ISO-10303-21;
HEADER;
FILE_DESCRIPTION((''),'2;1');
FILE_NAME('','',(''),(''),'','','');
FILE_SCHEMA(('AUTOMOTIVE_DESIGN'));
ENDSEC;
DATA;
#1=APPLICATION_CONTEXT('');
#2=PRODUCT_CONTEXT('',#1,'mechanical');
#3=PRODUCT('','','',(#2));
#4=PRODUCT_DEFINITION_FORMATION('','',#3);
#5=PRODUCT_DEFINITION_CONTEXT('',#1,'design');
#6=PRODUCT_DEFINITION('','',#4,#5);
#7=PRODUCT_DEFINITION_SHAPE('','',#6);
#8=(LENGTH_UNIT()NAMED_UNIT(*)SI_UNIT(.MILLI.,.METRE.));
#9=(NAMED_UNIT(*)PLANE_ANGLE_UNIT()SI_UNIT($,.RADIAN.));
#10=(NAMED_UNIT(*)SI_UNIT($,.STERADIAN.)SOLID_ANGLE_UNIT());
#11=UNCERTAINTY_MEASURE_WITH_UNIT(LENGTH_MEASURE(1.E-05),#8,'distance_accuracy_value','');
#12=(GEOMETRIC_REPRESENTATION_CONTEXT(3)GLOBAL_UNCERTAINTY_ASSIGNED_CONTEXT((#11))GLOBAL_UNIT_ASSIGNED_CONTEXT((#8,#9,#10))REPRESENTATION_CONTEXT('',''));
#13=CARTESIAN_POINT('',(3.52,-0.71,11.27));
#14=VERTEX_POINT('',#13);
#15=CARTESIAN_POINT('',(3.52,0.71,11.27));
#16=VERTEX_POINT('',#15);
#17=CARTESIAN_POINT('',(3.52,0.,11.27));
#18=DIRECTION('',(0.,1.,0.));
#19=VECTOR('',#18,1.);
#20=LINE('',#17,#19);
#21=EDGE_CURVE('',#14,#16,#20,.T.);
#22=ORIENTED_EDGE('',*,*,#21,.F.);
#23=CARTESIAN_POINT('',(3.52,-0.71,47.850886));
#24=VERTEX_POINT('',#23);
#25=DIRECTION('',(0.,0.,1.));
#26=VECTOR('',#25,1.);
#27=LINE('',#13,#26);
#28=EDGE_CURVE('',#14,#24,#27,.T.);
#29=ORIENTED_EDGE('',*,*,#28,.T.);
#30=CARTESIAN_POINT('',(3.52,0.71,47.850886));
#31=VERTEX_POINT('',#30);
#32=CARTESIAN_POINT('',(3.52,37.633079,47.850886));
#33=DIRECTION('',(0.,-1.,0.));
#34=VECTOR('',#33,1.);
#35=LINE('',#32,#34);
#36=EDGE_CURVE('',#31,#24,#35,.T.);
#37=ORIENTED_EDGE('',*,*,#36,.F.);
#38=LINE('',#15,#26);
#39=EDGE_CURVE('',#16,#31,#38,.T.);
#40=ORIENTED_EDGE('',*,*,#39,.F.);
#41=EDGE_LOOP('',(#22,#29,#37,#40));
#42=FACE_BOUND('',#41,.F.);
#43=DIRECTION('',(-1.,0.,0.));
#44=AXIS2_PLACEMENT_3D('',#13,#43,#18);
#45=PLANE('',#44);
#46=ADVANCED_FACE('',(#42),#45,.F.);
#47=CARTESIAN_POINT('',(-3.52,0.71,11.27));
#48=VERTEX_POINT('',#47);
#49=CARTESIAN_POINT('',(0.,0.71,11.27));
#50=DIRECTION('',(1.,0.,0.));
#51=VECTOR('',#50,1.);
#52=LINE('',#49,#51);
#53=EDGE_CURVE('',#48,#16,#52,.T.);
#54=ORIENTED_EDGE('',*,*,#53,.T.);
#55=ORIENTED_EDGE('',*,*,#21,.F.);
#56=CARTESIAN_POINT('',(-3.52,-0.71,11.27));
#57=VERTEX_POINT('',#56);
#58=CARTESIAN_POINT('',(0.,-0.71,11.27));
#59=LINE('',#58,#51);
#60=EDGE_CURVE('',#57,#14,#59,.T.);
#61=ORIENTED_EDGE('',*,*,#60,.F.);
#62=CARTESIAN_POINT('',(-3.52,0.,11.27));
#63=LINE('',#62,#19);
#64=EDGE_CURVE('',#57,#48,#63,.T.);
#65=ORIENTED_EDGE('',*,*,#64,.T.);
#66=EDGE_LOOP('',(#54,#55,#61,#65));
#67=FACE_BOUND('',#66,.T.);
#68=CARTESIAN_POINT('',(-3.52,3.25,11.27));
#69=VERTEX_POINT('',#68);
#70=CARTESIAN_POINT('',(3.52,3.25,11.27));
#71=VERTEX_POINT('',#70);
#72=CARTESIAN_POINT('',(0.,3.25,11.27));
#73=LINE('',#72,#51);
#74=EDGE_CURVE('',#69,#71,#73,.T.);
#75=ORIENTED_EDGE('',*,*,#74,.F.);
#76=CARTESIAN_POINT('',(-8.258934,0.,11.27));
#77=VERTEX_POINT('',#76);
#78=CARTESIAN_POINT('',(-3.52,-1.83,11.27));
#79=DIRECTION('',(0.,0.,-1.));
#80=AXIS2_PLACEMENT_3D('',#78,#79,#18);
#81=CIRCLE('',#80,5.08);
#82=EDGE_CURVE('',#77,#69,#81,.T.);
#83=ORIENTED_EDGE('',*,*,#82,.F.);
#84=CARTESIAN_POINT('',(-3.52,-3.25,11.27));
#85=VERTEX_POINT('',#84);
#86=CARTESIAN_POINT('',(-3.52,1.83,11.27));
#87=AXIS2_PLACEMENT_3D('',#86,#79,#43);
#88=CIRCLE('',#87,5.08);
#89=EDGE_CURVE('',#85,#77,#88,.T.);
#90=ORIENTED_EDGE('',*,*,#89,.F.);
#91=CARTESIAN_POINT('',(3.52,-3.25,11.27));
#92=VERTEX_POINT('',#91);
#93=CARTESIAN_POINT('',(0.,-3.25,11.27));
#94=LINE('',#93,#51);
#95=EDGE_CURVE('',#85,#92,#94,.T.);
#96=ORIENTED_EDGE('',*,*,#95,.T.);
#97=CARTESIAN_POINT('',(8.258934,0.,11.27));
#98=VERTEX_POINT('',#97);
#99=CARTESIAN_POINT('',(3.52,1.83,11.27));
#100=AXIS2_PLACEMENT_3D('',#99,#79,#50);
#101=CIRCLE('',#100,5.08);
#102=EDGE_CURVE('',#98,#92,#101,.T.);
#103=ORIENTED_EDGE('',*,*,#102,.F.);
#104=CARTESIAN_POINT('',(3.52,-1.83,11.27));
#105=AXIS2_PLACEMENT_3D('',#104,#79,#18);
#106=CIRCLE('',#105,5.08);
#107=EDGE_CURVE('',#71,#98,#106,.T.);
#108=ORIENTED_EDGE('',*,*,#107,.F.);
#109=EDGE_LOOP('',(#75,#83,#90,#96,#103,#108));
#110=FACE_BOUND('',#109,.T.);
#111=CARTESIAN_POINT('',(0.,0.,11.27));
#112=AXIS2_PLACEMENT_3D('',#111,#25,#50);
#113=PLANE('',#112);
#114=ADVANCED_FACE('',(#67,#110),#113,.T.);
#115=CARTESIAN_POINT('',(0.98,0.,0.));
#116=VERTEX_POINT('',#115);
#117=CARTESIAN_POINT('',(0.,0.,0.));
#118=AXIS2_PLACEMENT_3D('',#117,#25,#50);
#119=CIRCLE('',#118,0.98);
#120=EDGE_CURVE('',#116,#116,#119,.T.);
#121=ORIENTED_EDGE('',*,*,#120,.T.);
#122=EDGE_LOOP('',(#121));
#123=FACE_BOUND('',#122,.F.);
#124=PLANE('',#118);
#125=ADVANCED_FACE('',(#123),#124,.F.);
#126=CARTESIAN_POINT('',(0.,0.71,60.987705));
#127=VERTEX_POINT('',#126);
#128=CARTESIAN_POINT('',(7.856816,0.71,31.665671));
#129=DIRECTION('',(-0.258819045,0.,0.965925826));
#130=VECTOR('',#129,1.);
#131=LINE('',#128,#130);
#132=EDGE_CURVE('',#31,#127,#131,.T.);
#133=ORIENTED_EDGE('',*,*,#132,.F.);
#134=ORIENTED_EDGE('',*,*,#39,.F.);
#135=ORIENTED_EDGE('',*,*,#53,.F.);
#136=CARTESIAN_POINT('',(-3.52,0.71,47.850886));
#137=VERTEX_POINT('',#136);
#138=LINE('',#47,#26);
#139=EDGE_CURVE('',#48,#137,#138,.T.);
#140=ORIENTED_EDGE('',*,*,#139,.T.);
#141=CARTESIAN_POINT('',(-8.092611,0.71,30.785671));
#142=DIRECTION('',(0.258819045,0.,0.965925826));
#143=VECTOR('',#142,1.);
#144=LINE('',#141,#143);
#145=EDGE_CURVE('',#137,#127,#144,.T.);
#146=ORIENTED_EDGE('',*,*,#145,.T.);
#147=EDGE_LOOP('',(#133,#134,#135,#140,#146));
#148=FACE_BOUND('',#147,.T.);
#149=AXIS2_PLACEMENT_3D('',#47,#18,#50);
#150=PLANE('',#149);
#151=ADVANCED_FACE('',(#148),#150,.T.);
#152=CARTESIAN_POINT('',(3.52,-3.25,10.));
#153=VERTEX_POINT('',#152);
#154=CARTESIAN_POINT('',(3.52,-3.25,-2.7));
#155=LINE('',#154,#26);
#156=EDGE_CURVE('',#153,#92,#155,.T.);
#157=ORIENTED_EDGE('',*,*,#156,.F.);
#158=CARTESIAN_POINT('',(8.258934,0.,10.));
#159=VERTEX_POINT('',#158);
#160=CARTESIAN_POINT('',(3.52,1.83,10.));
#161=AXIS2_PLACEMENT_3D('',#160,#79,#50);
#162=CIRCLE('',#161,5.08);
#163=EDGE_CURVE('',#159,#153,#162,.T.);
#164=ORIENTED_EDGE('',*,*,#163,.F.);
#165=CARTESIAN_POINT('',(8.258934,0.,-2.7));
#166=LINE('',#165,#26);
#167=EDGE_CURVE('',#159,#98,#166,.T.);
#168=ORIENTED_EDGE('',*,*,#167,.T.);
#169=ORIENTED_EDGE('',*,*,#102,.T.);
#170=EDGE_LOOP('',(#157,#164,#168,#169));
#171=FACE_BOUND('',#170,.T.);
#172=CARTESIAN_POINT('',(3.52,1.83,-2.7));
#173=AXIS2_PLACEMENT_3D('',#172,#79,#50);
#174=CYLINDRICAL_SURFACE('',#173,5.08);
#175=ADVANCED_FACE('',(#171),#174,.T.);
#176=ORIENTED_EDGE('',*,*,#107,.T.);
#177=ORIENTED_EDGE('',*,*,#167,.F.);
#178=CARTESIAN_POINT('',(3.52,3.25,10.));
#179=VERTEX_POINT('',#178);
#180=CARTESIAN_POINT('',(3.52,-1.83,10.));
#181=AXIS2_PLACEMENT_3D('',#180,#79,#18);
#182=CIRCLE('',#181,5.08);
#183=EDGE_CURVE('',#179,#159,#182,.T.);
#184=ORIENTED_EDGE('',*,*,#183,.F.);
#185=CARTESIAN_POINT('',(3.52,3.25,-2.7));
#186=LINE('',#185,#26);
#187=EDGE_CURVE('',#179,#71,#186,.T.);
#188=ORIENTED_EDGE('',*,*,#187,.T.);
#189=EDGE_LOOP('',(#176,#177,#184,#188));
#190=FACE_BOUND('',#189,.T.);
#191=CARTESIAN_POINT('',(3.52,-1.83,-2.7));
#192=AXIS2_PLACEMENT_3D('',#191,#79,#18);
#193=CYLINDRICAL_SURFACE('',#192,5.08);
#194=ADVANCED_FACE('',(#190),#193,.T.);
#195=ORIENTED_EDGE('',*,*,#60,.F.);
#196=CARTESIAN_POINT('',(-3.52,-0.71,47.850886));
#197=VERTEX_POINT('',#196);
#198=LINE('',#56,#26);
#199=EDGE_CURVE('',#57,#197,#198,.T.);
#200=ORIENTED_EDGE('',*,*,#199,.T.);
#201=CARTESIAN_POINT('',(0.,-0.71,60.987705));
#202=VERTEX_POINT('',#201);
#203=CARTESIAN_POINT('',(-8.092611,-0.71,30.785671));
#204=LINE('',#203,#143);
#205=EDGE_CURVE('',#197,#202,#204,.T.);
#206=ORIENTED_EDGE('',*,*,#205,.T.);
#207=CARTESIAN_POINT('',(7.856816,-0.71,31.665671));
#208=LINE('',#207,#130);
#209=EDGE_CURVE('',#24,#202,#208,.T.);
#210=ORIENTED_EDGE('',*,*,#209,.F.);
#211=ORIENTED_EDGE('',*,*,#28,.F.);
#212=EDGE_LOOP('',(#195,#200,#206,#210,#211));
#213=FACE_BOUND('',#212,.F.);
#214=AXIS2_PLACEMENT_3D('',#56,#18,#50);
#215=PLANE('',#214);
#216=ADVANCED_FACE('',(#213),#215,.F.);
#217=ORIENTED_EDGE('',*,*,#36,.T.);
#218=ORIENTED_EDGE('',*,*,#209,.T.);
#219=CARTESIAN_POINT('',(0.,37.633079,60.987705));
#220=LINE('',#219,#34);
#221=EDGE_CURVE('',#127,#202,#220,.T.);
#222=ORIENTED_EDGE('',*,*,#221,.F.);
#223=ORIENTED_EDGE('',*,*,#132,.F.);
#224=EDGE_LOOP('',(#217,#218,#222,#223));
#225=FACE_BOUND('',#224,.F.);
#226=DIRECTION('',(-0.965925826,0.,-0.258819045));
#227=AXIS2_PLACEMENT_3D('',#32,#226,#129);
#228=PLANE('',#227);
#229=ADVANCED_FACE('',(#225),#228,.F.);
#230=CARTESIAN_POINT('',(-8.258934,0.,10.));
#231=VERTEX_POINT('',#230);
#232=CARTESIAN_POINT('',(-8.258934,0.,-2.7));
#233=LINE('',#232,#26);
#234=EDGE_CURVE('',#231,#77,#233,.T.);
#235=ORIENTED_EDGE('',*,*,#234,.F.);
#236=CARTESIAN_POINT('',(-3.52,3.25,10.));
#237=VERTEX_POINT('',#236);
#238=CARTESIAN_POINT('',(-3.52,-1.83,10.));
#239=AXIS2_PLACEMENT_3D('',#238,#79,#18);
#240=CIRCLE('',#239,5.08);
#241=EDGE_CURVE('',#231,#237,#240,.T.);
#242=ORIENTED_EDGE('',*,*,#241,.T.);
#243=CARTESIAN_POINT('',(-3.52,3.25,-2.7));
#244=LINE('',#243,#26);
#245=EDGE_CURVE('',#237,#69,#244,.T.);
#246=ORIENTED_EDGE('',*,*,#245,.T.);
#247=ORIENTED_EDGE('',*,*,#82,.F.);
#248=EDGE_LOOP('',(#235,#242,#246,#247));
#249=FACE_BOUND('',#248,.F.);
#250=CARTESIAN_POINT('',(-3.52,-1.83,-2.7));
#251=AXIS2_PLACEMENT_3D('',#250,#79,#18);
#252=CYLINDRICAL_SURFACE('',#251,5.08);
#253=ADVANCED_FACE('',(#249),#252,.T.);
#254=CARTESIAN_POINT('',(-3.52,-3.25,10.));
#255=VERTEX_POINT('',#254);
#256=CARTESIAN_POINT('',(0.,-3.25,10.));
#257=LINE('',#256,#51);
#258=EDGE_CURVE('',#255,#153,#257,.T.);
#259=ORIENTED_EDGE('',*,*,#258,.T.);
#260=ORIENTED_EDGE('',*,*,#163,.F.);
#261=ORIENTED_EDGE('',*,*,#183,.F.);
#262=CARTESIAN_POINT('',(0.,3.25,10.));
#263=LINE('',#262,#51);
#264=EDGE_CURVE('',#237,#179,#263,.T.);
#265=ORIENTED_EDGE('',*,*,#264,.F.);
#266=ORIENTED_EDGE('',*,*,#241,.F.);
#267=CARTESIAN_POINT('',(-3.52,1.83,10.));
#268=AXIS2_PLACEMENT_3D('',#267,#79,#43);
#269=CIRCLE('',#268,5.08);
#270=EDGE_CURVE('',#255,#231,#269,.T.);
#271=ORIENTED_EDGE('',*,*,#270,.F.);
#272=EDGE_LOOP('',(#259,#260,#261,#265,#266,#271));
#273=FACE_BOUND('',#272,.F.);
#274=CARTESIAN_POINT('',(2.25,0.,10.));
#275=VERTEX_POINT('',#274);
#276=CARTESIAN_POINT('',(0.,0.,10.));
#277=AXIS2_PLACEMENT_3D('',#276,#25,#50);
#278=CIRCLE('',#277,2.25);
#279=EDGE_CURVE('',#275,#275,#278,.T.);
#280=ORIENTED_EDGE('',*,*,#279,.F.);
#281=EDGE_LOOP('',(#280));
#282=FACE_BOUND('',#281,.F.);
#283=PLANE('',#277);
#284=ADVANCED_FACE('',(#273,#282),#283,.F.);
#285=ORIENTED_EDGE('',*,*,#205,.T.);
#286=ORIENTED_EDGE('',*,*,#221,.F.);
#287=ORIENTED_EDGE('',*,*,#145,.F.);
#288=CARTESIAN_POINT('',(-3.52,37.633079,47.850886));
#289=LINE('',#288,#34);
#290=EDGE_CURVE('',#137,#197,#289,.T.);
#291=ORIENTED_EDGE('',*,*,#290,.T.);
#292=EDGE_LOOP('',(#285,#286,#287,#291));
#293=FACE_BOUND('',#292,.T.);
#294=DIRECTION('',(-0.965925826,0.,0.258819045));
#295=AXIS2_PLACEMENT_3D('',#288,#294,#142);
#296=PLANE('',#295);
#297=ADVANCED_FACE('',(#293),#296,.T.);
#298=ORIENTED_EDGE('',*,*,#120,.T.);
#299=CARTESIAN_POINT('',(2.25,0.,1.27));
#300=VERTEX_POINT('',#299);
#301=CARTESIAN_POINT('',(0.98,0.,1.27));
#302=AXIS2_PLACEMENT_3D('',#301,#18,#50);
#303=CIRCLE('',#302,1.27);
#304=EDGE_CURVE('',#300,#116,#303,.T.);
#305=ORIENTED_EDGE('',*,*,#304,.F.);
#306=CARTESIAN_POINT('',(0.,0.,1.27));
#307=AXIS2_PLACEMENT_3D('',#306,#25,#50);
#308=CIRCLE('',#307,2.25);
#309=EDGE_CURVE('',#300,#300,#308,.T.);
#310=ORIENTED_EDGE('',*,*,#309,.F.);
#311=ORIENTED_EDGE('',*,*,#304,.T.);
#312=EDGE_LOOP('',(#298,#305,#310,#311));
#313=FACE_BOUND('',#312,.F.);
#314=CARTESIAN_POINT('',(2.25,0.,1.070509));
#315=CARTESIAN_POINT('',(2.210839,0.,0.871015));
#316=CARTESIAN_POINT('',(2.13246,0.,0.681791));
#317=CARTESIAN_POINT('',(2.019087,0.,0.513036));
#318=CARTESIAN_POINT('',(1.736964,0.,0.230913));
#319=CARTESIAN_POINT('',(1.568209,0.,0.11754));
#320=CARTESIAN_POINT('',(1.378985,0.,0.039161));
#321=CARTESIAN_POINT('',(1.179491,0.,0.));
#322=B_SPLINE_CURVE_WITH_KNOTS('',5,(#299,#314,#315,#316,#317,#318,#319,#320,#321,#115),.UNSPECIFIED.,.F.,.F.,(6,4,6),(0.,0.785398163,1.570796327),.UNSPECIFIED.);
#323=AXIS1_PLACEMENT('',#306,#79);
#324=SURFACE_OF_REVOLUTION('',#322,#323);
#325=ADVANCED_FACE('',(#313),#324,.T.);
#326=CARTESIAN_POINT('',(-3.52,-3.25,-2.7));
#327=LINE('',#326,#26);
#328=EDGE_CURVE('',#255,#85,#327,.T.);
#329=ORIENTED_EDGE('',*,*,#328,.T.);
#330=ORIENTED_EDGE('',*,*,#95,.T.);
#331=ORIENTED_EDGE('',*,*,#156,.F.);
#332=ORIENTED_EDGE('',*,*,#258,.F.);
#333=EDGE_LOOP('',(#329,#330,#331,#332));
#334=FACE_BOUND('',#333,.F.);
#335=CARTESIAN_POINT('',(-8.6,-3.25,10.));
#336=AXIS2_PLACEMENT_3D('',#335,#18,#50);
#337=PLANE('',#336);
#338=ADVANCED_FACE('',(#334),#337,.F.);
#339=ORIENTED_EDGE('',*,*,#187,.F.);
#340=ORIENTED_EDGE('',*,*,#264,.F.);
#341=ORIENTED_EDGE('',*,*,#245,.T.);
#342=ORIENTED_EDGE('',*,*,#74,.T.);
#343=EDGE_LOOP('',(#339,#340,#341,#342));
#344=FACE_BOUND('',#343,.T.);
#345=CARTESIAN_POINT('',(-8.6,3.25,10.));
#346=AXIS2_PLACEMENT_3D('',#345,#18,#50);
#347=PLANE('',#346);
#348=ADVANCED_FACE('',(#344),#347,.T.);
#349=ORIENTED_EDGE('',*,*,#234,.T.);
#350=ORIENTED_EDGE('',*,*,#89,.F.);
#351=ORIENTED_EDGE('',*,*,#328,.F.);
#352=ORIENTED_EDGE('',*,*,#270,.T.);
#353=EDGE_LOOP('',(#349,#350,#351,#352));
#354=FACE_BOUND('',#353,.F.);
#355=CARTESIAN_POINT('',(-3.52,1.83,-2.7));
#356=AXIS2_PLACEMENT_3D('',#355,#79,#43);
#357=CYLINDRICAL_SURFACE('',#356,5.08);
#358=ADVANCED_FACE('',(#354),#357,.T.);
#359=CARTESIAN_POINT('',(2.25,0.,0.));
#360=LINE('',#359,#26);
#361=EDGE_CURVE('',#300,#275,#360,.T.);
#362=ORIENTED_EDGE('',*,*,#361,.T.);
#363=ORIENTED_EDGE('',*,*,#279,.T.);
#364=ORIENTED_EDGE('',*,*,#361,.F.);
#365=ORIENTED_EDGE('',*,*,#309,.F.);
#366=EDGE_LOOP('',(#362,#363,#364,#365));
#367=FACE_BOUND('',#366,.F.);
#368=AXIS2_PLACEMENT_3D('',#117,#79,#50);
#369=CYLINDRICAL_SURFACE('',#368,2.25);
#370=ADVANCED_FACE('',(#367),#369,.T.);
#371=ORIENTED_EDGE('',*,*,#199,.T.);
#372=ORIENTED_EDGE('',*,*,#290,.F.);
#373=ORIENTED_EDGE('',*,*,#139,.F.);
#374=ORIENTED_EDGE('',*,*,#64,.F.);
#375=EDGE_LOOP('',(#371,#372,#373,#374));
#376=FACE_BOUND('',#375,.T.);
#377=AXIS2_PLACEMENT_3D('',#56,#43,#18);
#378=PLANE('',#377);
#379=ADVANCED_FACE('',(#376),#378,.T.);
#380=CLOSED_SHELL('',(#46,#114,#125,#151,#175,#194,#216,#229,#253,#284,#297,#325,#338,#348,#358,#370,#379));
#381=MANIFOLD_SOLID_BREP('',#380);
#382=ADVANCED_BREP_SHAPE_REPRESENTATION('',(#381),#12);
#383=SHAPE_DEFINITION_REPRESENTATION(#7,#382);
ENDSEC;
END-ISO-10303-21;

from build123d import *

# Parameters (mm, degrees)
F0_R        = 2.25
F1_DEPTH    = 10
F2_W        = 17.2
F2_H        = 6.5
F2_R        = 2.25
F3_DEPTH    = 1.27
F4_W        = 7.04
F4_H        = 1.42
F5_DEPTH    = 50.8
F6_T1_DEPTH = 75.2661578682
F7_T1_DEPTH = 26.67
F8_R        = 1.27


# Not quite as in the source:
# - a fillet or chamfer that OpenCascade refuses, or shapes differently, is made with other operations: its cross-section is extruded or revolved along the edge and cut away or added


with BuildPart() as f1:
    # F0 (on Top) → F1 (new body)
    with BuildSketch(Plane.XY):
        Circle(F0_R)
    extrude(amount=F1_DEPTH)

    # F2 (on face) → F3 (join)
    with BuildSketch(Plane.XY.offset(10)):
        Rectangle(F2_W, F2_H)
        Circle(F2_R, mode=Mode.SUBTRACT)
        Circle(F2_R)
    extrude(amount=F3_DEPTH)

    # F4 (on face) → F5 (join)
    with BuildSketch(Plane.XY.offset(11.27)):
        Rectangle(F4_W, F4_H)
    extrude(amount=F5_DEPTH)

    # F6: chamfer of 3.81 x 14.2191135768 on 2 edges, made by hand

    # F6_s2 → F6_t1 (cut)
    with BuildSketch(Plane.XZ.offset(-37.6330789341)):
        Polygon((-3.52, 47.8508864232), (0.29, 62.07), (-3.52, 62.07), align=None)
        Polygon((3.52, 47.8508864232), (-0.29, 62.07), (3.52, 62.07), align=None)
    extrude(amount=F6_T1_DEPTH, mode=Mode.SUBTRACT)

    # F7: fillet of radius 5.08 on 4 edges, made by hand

    # F7_s2 → F7_t1 (cut)
    with BuildSketch(Plane.XY.offset(-2.7)):
        with BuildLine():
            ThreePointArc((-8.6, 1.83), (-7.1121024484, -1.7621024484), (-3.52, -3.25))
            Line((-3.52, -3.25), (-8.6, -3.25))
            Line((-8.6, -3.25), (-8.6, 1.83))
        make_face()
        with BuildLine():
            ThreePointArc((-3.52, 3.25), (-7.1121024484, 1.7621024484), (-8.6, -1.83))
            Line((-8.6, -1.83), (-8.6, 3.25))
            Line((-8.6, 3.25), (-3.52, 3.25))
        make_face()
        with BuildLine():
            ThreePointArc((8.6, 1.83), (7.1121024484, -1.7621024484), (3.52, -3.25))
            Line((3.52, -3.25), (8.6, -3.25))
            Line((8.6, -3.25), (8.6, 1.83))
        make_face()
        with BuildLine():
            ThreePointArc((3.52, 3.25), (7.1121024484, 1.7621024484), (8.6, -1.83))
            Line((8.6, -1.83), (8.6, 3.25))
            Line((8.6, 3.25), (3.52, 3.25))
        make_face()
    extrude(amount=F7_T1_DEPTH, mode=Mode.SUBTRACT)

    # F8
    f8_edges = [f1.edges().sort_by_distance(p)[0] for p in [
        (-2.25, 0, 0),
    ]]
    fillet(f8_edges, radius=F8_R)


solid = f1.part
